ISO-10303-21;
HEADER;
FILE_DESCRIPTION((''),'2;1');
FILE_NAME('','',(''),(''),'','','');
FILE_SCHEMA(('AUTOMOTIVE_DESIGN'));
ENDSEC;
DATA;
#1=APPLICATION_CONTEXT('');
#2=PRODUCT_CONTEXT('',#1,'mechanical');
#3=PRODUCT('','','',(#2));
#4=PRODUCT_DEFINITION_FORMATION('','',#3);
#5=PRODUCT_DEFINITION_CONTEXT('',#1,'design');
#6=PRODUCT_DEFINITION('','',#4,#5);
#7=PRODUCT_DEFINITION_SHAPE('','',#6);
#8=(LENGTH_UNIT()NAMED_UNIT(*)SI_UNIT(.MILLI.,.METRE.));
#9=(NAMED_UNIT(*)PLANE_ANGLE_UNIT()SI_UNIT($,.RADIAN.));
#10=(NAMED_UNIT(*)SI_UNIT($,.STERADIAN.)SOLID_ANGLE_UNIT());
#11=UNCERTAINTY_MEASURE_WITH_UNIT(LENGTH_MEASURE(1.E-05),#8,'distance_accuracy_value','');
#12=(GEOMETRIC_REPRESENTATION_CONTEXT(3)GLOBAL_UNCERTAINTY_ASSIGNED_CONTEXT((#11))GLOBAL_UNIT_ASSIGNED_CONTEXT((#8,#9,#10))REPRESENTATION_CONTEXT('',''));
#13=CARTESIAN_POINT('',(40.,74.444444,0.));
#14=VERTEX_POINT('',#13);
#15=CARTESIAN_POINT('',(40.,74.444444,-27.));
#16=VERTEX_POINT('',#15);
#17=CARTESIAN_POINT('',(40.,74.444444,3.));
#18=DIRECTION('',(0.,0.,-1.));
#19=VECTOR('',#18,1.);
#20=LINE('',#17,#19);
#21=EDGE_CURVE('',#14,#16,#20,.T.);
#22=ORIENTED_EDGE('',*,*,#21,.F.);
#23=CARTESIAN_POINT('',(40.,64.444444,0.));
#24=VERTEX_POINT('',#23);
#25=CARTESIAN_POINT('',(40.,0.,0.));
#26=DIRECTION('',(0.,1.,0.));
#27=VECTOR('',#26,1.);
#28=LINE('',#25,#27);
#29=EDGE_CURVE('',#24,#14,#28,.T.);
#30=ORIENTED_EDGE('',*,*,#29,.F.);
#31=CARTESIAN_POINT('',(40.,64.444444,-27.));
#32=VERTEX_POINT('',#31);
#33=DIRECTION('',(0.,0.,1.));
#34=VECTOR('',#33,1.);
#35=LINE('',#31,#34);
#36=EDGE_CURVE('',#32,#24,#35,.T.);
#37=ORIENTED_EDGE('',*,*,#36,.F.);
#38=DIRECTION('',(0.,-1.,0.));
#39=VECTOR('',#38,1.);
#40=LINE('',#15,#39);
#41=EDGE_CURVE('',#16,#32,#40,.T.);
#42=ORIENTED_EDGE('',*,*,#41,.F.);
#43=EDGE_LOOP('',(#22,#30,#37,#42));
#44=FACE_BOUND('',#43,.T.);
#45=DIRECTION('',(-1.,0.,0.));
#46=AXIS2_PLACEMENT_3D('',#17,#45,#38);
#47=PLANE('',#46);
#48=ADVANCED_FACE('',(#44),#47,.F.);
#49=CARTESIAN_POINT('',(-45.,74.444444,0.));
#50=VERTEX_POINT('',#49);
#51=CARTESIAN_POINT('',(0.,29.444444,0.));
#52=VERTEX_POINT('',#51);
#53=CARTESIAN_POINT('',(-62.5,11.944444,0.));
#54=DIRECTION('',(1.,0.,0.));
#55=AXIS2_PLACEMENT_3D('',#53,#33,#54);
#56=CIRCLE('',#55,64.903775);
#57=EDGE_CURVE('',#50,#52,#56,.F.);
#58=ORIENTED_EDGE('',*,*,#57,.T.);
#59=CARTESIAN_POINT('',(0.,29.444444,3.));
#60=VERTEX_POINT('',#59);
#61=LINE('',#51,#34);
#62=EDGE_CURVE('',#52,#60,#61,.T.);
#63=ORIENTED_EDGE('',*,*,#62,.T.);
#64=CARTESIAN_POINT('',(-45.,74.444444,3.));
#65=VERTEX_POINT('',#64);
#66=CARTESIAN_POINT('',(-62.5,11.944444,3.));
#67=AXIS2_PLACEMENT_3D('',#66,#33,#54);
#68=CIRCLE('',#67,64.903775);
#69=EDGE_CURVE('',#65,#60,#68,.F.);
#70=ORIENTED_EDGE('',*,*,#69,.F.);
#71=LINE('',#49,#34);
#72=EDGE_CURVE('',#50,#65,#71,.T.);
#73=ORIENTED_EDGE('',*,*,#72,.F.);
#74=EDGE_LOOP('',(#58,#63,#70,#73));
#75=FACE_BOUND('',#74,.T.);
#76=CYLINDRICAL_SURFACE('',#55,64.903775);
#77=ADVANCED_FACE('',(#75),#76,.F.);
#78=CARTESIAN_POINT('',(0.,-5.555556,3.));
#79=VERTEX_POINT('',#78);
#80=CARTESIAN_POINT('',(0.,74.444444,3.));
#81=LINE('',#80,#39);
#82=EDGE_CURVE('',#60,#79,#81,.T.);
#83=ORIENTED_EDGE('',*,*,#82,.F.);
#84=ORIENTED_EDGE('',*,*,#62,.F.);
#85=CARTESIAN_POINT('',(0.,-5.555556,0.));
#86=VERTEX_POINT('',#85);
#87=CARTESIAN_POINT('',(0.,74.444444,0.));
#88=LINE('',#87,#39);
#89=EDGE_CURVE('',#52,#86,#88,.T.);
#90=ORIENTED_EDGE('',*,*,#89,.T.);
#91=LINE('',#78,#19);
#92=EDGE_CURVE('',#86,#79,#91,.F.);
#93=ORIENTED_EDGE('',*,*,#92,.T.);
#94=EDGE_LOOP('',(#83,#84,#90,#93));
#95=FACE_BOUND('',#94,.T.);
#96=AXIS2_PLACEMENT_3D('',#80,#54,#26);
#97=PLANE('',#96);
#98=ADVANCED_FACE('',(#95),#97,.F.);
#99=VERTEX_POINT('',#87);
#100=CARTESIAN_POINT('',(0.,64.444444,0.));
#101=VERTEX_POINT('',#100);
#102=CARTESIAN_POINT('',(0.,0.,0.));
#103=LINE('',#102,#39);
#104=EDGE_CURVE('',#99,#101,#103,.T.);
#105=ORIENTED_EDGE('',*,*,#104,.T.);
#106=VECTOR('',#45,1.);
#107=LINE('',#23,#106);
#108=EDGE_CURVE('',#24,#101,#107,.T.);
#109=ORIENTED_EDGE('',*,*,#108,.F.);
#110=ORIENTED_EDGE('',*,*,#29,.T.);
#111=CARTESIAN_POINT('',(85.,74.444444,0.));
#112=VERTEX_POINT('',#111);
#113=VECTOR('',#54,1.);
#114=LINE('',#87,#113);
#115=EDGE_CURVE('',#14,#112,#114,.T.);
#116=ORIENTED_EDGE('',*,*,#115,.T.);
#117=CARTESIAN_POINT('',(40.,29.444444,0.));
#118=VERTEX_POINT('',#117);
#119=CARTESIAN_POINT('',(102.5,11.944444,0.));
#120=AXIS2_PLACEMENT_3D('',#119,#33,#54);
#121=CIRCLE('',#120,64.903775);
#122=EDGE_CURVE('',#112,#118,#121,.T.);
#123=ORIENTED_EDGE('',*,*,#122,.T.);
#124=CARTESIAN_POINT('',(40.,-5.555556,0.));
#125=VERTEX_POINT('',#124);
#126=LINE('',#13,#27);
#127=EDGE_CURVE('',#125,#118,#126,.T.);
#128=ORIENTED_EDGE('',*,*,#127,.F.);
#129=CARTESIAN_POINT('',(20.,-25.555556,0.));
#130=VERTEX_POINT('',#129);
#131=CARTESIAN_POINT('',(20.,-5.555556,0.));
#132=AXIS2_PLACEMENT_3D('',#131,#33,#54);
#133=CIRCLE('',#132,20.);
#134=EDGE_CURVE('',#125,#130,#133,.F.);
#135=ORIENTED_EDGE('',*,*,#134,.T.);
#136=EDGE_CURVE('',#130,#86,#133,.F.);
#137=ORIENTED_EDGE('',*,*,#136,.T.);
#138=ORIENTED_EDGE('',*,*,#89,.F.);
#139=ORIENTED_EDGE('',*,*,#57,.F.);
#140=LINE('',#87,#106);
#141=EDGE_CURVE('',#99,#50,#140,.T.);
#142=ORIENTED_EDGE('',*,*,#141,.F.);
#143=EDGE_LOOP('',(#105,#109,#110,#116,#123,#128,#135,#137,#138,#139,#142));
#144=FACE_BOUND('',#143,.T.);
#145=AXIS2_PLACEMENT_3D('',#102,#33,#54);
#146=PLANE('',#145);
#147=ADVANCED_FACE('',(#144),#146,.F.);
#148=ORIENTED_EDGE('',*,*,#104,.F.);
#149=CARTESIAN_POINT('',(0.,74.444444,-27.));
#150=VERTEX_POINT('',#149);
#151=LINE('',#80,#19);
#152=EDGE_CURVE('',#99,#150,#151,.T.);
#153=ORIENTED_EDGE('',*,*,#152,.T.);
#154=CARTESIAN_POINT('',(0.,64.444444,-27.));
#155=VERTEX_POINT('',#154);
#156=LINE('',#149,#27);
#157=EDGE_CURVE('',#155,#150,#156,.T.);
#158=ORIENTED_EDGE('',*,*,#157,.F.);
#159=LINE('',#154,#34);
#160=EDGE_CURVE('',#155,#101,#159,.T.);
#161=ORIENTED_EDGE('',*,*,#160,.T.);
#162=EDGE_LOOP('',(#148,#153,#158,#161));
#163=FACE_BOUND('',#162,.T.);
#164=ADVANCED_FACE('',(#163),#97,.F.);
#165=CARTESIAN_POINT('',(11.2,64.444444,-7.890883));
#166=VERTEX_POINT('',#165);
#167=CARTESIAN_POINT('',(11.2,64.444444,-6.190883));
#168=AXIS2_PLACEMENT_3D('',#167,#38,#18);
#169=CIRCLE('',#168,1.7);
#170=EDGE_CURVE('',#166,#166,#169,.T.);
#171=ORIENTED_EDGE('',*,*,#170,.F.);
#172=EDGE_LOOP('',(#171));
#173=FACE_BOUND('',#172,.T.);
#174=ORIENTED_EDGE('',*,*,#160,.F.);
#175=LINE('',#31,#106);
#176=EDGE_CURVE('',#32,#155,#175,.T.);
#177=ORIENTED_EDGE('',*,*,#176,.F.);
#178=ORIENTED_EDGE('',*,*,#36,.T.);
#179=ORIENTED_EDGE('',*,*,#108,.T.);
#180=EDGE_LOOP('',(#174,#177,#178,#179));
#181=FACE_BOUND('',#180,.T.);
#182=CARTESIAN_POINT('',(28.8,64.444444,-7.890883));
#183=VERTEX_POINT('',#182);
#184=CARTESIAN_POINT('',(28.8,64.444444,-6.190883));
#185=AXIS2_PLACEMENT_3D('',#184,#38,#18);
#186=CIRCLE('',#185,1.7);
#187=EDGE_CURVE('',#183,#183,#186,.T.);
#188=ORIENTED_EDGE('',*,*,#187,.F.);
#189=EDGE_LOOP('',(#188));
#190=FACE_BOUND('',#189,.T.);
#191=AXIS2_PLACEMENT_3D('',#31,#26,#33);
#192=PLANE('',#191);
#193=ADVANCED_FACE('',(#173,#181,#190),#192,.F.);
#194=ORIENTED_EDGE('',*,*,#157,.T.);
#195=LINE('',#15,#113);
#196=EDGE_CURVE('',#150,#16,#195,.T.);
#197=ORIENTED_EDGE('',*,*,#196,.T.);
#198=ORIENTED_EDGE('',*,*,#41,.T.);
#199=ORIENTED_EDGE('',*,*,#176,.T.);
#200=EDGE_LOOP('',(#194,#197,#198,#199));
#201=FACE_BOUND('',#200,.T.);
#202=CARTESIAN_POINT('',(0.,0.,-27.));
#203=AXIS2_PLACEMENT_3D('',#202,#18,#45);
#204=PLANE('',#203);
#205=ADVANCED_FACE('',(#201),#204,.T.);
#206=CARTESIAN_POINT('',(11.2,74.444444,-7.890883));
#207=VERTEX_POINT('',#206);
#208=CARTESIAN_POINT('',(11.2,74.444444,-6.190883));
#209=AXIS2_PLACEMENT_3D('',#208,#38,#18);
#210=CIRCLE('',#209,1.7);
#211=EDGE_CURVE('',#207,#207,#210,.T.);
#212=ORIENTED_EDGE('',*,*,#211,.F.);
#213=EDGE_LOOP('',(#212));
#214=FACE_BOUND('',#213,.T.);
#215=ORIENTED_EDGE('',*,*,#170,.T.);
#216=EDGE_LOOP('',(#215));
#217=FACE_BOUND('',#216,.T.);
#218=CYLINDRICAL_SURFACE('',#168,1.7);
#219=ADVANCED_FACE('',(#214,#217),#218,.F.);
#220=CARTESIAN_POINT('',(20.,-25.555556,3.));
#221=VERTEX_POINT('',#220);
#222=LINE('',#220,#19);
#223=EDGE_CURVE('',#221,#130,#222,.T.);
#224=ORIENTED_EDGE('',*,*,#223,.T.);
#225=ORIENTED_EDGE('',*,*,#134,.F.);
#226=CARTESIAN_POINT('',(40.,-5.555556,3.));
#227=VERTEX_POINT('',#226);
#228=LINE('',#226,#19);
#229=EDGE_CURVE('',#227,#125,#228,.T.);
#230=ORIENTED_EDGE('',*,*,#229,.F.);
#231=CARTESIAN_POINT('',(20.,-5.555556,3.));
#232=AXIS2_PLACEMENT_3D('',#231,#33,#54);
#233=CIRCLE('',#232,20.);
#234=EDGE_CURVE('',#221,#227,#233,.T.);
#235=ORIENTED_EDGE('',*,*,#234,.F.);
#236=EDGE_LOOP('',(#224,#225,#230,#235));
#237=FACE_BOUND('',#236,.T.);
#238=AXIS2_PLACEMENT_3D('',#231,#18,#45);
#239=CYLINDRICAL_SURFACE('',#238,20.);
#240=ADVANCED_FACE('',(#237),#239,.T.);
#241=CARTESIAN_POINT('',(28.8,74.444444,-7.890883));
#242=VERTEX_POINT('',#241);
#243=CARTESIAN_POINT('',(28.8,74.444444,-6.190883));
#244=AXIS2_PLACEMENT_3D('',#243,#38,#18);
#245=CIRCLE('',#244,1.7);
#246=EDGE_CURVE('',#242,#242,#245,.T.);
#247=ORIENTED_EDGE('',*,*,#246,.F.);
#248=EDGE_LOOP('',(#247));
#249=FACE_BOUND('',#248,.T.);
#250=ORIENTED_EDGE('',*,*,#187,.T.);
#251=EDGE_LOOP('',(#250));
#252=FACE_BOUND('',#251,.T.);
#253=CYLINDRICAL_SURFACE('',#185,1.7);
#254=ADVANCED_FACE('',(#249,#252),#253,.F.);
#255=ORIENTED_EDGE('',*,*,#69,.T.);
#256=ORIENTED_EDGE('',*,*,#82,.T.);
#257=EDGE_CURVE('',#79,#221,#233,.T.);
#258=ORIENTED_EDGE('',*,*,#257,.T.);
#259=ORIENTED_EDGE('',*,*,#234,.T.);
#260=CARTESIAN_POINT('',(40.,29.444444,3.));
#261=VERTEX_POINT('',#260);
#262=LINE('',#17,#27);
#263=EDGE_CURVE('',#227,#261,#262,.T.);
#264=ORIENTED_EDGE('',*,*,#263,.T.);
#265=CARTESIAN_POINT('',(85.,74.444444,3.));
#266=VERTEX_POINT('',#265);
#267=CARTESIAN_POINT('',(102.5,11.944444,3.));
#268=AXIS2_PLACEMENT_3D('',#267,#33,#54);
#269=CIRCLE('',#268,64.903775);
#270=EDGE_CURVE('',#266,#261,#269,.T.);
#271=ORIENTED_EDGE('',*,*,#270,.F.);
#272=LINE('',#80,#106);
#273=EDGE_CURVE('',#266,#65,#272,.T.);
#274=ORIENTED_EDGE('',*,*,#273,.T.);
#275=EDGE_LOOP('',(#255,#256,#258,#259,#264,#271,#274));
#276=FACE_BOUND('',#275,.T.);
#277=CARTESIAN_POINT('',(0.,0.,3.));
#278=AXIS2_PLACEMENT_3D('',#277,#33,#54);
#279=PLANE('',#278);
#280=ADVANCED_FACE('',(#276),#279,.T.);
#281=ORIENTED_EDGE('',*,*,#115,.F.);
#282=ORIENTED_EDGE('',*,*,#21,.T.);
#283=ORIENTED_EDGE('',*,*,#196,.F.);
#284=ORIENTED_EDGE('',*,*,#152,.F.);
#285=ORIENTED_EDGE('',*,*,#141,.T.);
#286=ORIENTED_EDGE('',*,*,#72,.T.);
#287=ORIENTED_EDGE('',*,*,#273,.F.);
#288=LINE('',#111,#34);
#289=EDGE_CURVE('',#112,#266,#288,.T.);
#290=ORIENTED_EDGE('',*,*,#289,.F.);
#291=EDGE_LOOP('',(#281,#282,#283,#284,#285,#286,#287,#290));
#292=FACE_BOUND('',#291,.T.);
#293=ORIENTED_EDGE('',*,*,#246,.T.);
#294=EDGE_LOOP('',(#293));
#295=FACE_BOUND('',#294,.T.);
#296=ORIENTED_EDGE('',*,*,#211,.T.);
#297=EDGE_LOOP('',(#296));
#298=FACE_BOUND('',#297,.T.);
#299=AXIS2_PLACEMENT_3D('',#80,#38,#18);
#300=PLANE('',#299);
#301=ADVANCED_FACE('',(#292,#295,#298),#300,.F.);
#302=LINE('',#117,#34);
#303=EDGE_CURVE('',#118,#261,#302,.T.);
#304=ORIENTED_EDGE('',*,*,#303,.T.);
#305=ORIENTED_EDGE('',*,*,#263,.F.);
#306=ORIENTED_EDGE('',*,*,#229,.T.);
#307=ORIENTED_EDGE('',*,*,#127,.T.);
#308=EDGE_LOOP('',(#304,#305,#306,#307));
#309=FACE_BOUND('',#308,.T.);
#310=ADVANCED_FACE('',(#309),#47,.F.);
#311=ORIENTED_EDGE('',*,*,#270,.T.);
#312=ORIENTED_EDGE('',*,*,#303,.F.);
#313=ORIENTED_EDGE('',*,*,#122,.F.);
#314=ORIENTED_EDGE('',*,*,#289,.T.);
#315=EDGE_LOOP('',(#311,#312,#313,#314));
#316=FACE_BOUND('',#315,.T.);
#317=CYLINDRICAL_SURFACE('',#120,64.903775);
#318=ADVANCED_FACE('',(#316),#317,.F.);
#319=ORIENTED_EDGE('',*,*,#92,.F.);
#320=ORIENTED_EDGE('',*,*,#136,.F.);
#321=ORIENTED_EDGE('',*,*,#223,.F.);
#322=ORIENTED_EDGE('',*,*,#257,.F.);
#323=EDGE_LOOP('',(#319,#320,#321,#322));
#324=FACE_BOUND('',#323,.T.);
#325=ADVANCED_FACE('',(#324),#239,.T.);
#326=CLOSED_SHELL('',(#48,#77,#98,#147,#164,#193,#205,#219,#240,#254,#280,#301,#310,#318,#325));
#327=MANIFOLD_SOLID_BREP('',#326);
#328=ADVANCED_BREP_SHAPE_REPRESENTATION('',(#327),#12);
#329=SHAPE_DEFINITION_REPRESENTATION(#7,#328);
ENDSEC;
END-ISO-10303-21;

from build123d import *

# Parameters (mm, degrees)
SKETCH1_W            = 40
SKETCH1_H            = 100
BOSS_EXTRUDE1_DEPTH  = 3
FILLET1_R            = 20
SKETCH2_W            = 40
SKETCH2_H            = 10
BOSS_EXTRUDE2_DEPTH  = 27
M3_CLEARANCE_HOLE1_D = 3.4
BOSS_EXTRUDE4_DEPTH  = 3


with BuildPart() as part:
    # Sketch1 → Boss-Extrude1 (new body)
    with BuildSketch(Plane.XY):
        with Locations((20, 24.444444444)):
            Rectangle(SKETCH1_W, SKETCH1_H)
    extrude(amount=BOSS_EXTRUDE1_DEPTH)

    # Fillet1
    fillet1_edges = [part.edges().sort_by_distance(p)[0] for p in [
        (40, -25.555555556, 1.5),
        (0, -25.555555556, 1.5),
    ]]
    fillet(fillet1_edges, radius=FILLET1_R - 0.0001)  # a hair under: the kernel refuses the full size

    # Sketch2 → Boss-Extrude2 (add)
    with BuildSketch(Plane(origin=(0, 0, 0), x_dir=(-1, 0, 0), z_dir=(0, 0, -1))):
        with Locations((-20, 69.444444444)):
            Rectangle(SKETCH2_W, SKETCH2_H)
    extrude(amount=BOSS_EXTRUDE2_DEPTH)

    # M3 Clearance Hole1 (through all)
    with Locations(Plane(origin=(0, 64.444444444, 0), x_dir=(-1, 0, 0), z_dir=(0, -1, 0))):
        with Locations((-28.8, 6.190883488), (-11.2, 6.190883488)):
            Hole(M3_CLEARANCE_HOLE1_D / 2)

    # Sketch15 → Boss-Extrude4 (add)
    with BuildSketch(Plane.XY.offset(3)):
        with BuildLine():
            Line((85, 74.444444444), (40, 74.444444444))
            Line((40, 74.444444444), (40, 29.444444444))
            ThreePointArc((40, 29.444444444), (56.606100623, 57.838343821), (85, 74.444444444))
        make_face()
        with BuildLine():
            Line((0, 29.444444444), (0, 74.444444444))
            Line((0, 74.444444444), (-45, 74.444444444))
            ThreePointArc((-45, 74.444444444), (-16.606100623, 57.838343821), (0, 29.444444444))
        make_face()
    extrude(amount=-BOSS_EXTRUDE4_DEPTH)


solid = part.part
